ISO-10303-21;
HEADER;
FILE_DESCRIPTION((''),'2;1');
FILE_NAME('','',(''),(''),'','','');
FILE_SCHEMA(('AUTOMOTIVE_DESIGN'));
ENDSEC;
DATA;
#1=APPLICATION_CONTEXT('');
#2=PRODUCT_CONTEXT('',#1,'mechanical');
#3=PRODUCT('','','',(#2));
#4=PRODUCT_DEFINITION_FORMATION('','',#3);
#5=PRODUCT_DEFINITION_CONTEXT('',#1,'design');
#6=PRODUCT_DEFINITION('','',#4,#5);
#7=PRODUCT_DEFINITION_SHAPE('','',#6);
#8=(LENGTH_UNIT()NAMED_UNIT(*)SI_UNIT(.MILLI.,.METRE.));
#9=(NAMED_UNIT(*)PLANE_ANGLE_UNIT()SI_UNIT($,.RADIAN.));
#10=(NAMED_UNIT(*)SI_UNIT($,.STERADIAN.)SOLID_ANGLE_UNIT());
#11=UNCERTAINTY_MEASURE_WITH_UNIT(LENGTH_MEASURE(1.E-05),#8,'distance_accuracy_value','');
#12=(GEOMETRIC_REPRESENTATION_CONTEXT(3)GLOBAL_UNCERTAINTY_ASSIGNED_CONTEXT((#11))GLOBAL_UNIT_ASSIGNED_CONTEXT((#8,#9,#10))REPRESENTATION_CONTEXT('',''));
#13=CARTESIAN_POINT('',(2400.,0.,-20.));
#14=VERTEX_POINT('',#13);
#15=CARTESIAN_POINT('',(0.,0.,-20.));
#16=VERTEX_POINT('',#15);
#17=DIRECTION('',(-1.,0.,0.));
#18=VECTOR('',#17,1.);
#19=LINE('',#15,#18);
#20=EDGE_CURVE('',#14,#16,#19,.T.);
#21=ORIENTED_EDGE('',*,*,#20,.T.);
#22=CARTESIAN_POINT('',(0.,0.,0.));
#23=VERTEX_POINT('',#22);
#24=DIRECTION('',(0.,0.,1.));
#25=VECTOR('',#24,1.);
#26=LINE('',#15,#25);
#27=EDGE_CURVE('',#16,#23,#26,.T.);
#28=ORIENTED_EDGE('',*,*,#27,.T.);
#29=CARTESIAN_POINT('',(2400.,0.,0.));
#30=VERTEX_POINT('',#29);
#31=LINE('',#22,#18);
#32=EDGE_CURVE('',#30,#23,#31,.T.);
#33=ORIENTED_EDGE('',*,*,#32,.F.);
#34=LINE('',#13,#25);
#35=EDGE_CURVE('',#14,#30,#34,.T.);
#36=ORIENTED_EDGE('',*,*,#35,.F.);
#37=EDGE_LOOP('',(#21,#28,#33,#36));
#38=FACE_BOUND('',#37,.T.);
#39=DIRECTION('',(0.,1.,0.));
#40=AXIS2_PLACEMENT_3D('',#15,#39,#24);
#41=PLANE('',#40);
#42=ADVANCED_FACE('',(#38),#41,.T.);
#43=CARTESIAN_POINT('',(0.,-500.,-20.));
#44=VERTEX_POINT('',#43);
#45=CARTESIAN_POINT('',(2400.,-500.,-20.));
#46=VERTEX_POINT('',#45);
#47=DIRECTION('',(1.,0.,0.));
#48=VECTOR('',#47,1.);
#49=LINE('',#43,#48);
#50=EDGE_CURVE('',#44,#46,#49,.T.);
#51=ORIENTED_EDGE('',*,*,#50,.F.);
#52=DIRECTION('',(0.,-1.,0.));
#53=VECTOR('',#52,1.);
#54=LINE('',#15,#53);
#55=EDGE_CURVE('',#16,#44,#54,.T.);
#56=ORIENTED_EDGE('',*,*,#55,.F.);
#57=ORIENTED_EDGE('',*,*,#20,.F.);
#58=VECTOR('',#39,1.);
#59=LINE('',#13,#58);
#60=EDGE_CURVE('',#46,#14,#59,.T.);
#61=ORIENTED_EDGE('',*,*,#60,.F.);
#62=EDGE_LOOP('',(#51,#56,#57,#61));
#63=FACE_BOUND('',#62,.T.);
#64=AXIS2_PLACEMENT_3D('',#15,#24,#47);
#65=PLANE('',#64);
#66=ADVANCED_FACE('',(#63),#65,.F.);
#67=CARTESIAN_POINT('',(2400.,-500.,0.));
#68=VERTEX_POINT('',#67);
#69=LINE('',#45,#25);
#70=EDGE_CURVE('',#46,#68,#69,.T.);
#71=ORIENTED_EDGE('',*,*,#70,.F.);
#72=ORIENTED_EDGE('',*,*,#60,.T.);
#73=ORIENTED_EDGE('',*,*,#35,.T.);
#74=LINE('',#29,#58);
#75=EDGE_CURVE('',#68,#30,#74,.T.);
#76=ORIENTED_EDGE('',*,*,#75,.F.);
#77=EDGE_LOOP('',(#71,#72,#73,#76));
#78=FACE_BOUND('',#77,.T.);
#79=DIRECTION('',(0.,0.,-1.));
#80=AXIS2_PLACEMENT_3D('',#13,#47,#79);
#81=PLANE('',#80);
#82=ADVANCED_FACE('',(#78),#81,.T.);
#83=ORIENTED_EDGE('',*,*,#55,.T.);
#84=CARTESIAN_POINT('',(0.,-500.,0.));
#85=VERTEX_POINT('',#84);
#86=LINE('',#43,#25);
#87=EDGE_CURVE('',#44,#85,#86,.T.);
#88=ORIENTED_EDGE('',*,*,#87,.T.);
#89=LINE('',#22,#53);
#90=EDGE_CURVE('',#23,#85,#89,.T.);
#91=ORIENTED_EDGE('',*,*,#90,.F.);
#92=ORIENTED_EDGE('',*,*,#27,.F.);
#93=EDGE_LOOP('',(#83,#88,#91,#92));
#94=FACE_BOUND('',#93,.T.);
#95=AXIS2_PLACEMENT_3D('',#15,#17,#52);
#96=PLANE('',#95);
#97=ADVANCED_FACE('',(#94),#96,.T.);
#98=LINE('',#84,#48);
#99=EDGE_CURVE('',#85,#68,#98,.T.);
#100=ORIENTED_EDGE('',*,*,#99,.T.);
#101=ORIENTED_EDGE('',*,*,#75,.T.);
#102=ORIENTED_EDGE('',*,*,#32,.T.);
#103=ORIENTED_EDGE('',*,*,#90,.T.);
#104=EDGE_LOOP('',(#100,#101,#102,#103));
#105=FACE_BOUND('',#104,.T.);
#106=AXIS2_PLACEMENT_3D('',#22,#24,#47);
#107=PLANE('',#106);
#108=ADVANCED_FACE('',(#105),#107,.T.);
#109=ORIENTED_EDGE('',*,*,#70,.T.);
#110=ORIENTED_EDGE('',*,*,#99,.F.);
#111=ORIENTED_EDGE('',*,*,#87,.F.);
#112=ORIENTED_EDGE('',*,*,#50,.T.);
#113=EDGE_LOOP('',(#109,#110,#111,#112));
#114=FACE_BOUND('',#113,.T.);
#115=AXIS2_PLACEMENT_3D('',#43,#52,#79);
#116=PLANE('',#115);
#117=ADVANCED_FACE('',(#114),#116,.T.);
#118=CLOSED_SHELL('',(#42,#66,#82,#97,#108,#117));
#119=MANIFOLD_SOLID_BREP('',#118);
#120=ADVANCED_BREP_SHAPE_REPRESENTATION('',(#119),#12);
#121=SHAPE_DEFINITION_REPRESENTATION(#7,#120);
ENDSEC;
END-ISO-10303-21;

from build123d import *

# Parameters (mm, degrees)
IZIM1_W            = 2400
IZIM1_H            = 500
TABAN_FLAN_1_DEPTH = 20


# Sheet-metal steps are written as plain solids
with BuildPart() as part:
    # Çizim1 → Taban-Flanş1 (new body)
    with BuildSketch(Plane.XY):
        with Locations((1200, -250)):
            Rectangle(IZIM1_W, IZIM1_H)
    extrude(amount=-TABAN_FLAN_1_DEPTH)


solid = part.part
